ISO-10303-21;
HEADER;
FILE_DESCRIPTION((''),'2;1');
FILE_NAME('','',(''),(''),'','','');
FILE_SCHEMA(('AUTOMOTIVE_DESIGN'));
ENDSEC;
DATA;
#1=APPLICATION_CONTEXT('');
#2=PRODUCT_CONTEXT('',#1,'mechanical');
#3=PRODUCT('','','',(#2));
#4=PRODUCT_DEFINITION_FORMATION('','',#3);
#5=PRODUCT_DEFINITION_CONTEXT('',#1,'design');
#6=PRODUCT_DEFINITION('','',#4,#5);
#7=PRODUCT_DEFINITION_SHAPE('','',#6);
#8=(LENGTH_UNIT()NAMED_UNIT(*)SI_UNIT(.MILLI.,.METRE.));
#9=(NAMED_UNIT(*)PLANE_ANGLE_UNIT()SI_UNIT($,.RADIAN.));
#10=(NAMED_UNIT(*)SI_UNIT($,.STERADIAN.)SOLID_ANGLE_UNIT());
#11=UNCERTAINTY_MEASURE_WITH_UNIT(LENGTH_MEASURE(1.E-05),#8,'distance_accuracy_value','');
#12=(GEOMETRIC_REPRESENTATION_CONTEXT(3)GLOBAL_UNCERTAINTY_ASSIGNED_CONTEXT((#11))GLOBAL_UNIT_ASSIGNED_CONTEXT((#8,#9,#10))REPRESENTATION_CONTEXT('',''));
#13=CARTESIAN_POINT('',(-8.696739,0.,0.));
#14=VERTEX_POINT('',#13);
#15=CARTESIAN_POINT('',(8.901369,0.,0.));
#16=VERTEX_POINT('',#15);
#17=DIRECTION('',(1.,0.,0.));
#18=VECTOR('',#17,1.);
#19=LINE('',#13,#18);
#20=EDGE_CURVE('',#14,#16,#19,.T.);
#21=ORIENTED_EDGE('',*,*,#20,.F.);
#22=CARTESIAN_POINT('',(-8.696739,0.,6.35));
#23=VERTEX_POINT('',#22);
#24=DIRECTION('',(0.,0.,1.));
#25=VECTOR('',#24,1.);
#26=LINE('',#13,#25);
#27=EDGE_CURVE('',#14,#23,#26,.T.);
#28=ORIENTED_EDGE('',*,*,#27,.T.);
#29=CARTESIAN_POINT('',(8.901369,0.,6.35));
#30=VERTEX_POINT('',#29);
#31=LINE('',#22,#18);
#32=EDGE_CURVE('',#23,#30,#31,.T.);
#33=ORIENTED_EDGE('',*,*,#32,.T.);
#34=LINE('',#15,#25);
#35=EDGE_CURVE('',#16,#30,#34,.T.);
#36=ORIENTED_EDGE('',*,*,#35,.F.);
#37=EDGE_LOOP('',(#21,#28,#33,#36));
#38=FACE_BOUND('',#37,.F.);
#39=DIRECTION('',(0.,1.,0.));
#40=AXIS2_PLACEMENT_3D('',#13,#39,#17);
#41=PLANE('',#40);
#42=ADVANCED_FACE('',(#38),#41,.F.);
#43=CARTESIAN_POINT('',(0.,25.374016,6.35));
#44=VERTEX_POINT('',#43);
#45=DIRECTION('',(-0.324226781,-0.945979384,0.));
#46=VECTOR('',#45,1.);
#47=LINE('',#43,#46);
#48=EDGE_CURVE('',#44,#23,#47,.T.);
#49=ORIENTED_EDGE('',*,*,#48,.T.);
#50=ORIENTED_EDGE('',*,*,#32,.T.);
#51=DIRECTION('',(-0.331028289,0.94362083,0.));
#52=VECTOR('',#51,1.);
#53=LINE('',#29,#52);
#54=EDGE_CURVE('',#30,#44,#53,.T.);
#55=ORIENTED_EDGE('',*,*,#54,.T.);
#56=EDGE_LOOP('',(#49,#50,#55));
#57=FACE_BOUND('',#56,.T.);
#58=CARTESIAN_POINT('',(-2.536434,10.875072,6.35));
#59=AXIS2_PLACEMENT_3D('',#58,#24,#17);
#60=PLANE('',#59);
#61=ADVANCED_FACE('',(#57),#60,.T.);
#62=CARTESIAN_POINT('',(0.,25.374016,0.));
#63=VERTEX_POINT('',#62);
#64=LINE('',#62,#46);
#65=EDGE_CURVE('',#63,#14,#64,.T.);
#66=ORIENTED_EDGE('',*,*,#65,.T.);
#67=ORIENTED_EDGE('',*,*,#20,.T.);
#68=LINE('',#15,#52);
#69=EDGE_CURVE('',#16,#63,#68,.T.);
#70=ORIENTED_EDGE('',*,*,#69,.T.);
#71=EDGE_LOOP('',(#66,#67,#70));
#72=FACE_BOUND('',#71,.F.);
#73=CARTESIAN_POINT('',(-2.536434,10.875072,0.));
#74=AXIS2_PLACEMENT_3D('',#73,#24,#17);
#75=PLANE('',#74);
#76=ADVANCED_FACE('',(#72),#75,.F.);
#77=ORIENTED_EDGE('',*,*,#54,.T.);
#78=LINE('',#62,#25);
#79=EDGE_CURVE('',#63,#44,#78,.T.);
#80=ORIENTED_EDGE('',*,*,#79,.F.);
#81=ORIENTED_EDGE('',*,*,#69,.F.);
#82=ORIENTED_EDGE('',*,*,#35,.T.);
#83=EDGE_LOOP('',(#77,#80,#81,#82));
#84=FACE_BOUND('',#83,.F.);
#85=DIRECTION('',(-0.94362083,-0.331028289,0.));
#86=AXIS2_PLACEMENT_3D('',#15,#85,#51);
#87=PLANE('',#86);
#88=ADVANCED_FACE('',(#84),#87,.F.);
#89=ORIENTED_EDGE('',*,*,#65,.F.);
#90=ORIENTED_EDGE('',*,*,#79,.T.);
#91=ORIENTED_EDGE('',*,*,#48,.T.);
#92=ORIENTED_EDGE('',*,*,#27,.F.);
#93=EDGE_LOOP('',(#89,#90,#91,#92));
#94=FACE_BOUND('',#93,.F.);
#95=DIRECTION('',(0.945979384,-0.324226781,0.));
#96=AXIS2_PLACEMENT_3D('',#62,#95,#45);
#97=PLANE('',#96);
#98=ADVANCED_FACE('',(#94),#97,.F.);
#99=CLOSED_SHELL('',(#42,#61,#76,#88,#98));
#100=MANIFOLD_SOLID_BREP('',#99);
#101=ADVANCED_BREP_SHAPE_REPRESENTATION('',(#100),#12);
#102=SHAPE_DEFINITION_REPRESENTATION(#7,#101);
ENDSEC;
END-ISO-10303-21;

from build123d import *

# Parameters (mm, degrees)
F1_DEPTH = 6.35


# Not quite as in the source:
# - a feature of the source that left no trace in its solid (it failed there, or was rolled back) is left out


with BuildPart() as f1:
    # F0 (on Top) → F1 (new body)
    with BuildSketch(Plane.XY):
        Polygon((-8.6967386305, 0), (0, 0), (0, 25.3740157932), align=None)
        Polygon((0, 25.3740157932), (0, 0), (8.9013688266, 0), align=None)
    extrude(amount=F1_DEPTH)


solid = f1.part
